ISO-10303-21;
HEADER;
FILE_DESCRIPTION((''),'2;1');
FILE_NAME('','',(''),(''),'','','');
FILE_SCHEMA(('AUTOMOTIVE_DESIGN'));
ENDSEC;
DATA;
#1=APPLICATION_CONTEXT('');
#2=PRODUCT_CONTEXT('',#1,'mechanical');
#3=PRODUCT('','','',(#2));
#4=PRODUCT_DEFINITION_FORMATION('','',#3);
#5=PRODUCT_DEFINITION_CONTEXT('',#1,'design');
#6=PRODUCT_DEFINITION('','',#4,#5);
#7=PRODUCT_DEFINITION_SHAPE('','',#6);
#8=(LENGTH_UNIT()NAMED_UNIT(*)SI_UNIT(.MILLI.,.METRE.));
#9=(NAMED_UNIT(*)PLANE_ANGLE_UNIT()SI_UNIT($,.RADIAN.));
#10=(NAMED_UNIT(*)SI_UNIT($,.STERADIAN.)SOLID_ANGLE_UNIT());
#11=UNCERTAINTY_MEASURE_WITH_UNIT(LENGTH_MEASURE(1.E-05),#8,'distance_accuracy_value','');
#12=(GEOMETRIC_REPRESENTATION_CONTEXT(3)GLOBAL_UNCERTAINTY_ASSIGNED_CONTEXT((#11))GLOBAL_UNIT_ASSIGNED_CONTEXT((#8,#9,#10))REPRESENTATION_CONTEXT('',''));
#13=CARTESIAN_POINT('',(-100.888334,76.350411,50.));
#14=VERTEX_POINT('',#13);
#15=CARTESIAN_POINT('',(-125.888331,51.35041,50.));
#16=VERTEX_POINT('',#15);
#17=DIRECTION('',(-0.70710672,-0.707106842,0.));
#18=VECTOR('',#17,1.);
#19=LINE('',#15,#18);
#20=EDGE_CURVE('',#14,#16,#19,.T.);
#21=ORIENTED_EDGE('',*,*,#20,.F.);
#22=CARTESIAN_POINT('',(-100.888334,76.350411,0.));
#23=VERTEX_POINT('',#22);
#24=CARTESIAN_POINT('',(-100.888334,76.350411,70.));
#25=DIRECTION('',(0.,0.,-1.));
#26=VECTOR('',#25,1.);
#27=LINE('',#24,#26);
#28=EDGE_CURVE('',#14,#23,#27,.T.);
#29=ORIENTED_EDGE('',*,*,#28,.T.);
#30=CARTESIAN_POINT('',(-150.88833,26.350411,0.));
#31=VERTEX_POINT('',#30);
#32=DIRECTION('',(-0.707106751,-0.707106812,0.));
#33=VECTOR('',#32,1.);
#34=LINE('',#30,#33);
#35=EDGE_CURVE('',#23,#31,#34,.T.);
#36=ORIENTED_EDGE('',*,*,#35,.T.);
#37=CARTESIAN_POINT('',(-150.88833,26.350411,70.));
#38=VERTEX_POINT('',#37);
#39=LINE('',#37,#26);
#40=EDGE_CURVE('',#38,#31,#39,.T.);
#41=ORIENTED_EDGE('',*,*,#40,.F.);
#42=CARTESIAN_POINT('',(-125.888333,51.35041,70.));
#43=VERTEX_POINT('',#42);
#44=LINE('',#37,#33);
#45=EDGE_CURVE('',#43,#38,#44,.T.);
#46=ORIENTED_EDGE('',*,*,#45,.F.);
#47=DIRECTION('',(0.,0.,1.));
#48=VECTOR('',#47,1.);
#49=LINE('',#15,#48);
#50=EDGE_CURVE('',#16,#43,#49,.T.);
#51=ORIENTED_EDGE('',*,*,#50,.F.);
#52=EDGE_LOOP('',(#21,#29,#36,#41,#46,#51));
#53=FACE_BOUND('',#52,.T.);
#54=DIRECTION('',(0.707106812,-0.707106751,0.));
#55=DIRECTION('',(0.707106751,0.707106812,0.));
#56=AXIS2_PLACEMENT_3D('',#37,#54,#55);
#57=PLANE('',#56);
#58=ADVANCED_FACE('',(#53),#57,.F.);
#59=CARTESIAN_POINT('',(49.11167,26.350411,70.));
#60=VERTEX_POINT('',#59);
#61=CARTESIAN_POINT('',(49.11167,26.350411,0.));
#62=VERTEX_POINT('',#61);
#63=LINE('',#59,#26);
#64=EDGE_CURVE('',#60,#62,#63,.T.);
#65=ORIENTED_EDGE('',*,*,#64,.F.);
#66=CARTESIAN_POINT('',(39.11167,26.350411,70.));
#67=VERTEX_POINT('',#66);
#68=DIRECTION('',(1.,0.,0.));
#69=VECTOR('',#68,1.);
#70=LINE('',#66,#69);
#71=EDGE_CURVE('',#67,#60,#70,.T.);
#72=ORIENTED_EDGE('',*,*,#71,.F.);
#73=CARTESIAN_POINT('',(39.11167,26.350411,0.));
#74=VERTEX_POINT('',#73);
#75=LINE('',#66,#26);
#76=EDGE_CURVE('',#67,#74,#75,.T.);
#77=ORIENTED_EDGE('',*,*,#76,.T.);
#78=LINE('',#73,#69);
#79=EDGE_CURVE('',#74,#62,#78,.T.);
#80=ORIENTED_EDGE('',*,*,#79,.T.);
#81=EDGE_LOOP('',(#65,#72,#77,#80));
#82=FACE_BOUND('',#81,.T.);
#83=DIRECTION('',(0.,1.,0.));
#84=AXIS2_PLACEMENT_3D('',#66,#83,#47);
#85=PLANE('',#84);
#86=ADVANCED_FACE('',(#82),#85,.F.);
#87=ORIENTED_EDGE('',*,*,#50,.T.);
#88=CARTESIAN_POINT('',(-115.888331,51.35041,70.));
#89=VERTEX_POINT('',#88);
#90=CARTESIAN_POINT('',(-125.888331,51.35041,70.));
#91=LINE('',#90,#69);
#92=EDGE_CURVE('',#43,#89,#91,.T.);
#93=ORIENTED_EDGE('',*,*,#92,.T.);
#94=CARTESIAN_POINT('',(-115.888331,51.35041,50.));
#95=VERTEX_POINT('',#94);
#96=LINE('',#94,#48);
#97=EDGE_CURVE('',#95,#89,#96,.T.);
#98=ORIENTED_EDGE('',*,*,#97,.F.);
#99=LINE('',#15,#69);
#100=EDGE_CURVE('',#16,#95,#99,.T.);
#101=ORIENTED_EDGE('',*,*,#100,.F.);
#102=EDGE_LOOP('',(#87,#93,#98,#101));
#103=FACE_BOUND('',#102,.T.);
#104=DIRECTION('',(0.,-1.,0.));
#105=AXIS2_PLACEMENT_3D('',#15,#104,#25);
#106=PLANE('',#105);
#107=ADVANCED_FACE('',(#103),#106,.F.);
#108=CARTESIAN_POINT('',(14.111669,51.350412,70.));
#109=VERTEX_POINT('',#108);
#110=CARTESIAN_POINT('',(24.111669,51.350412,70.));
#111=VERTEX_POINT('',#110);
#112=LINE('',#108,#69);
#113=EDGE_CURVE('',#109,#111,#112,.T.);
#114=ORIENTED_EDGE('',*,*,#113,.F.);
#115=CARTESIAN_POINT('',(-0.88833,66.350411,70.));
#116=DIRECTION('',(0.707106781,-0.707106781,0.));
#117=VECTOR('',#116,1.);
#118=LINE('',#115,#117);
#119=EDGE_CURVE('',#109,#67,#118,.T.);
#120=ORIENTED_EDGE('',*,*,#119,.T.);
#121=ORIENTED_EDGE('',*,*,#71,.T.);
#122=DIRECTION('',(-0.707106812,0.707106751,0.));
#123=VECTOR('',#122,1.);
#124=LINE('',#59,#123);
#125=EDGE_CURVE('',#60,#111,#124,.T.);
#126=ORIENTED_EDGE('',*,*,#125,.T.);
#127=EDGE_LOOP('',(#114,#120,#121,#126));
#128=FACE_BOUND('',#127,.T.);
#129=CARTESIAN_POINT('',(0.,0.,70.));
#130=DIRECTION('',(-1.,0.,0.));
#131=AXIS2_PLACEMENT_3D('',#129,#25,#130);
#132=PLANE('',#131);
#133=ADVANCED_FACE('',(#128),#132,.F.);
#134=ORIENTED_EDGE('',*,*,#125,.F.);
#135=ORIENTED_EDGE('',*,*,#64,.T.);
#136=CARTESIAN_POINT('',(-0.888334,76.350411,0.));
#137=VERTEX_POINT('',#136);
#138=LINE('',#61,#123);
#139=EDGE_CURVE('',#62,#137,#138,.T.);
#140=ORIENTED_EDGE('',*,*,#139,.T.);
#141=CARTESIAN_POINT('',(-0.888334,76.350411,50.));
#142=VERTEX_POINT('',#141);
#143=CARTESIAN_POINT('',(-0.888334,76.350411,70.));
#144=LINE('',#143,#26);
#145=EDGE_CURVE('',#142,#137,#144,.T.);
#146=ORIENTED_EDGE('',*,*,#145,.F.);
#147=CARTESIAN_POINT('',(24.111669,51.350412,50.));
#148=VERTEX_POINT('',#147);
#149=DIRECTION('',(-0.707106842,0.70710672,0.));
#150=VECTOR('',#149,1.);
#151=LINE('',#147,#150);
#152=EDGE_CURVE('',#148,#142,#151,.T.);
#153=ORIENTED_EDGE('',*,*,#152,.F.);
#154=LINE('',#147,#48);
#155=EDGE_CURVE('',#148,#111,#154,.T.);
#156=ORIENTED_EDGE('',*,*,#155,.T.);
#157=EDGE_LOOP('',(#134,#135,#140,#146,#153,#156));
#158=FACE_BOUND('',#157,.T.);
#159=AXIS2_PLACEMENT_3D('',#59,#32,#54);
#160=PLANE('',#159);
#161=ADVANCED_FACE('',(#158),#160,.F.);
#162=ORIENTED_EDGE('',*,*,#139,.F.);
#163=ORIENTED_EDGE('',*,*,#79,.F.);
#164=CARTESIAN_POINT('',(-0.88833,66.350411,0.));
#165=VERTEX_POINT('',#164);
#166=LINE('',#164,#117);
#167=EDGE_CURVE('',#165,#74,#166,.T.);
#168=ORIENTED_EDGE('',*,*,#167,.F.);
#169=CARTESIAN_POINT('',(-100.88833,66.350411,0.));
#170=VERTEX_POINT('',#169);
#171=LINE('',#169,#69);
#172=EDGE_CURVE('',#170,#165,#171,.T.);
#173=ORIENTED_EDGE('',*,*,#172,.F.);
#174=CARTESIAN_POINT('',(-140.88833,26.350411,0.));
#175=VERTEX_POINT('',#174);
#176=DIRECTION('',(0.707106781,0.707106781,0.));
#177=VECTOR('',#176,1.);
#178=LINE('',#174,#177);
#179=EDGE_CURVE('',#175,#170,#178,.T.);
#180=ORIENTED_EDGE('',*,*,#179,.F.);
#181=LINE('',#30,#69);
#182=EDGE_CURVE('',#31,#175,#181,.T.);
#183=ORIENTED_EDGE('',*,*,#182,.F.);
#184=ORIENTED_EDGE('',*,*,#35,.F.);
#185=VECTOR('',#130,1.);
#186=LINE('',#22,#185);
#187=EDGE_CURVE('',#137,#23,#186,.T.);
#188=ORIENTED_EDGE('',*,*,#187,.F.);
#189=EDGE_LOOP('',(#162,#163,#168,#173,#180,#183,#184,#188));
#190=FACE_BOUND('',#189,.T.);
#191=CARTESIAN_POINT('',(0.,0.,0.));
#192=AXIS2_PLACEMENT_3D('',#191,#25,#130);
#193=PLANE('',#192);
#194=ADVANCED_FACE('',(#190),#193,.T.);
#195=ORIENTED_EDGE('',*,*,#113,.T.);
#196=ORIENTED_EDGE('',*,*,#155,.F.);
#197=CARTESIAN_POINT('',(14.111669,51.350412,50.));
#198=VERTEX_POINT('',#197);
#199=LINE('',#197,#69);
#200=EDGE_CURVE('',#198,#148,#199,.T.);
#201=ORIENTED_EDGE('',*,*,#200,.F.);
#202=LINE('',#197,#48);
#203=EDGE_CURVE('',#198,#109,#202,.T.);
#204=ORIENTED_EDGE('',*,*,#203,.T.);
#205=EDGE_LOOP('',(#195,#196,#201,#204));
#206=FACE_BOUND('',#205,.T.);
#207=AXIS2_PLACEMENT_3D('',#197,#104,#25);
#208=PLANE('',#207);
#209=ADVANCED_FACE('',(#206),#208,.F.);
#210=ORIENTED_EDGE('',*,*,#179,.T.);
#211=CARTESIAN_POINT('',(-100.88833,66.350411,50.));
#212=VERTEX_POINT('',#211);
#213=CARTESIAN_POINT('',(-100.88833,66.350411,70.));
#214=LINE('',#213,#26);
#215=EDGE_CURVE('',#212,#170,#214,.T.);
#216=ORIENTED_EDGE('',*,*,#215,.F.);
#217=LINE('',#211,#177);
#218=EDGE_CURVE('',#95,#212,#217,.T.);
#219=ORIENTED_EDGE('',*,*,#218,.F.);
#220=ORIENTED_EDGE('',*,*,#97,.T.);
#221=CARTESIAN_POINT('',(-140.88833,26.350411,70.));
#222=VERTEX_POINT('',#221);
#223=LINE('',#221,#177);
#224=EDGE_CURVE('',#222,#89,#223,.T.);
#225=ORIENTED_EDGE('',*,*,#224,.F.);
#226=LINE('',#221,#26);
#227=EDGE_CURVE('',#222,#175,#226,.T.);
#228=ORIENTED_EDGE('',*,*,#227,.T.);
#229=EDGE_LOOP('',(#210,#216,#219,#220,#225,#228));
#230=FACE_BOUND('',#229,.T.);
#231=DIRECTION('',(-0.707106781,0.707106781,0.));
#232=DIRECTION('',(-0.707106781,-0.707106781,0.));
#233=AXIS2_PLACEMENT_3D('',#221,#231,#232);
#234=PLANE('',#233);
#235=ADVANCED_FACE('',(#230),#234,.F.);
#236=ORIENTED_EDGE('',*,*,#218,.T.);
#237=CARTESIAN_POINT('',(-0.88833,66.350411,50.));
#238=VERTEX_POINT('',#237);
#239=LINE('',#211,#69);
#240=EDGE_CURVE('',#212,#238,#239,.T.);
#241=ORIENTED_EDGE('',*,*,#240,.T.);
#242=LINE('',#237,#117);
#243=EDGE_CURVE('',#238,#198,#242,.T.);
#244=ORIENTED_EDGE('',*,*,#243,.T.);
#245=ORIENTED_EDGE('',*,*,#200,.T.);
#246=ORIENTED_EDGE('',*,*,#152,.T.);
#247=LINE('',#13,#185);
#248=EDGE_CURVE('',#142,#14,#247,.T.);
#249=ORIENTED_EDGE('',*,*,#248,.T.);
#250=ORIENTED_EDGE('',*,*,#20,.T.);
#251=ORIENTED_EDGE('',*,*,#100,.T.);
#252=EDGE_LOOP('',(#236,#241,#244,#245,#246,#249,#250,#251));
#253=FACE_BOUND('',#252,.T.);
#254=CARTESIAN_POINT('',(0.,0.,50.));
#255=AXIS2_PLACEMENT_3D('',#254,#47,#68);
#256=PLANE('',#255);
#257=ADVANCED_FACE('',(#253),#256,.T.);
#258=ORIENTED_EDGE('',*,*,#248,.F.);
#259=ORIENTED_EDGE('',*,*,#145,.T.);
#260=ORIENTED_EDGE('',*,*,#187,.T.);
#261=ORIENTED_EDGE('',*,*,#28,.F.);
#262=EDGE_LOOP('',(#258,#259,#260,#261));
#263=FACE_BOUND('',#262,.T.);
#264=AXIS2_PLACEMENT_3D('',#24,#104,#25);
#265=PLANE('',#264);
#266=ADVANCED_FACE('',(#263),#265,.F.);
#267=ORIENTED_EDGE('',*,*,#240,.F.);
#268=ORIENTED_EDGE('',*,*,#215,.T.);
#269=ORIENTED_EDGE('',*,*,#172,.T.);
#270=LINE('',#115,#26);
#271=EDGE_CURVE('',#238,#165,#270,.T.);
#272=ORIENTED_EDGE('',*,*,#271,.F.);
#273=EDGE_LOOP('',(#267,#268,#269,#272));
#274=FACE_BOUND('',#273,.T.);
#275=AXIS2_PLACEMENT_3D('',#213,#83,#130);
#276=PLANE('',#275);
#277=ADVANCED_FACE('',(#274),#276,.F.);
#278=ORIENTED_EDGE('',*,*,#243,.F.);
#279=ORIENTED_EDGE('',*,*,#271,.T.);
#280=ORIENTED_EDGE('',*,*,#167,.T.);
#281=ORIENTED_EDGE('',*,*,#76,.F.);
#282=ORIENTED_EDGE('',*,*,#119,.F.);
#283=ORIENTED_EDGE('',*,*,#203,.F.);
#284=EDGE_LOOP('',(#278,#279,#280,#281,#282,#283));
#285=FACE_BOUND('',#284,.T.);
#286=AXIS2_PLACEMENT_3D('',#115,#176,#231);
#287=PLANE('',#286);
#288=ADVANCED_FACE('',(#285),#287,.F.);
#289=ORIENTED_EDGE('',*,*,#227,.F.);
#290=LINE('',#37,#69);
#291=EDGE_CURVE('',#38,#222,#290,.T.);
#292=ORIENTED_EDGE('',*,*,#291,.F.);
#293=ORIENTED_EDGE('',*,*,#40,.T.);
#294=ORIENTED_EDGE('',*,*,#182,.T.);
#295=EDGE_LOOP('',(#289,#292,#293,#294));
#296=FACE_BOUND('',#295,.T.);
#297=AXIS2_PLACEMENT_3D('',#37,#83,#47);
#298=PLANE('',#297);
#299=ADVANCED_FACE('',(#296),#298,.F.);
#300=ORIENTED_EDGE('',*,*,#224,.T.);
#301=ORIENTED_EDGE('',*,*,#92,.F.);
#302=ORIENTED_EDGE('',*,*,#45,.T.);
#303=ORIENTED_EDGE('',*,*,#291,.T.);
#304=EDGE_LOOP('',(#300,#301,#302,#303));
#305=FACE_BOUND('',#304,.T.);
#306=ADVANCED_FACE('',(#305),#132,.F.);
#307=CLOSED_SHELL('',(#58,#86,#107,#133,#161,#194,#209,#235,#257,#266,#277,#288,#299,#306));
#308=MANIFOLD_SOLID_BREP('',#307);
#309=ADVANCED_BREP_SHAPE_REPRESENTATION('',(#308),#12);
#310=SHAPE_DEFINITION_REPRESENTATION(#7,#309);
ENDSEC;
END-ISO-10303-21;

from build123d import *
from OCP.BRepAlgoAPI import BRepAlgoAPI_Cut
from OCP.TopTools import TopTools_ListOfShape

# Parameters (mm, degrees)
EXTRUDE_1_DEPTH     = 70
CUT_EXTRUDE_1_DEPTH = 20


with BuildPart() as part:
    # 草图2 → 凸台-拉伸1 (new body)
    with BuildSketch(Plane.XY):
        Polygon((-150.888329598, 26.350410604), (-100.888333902, 76.350410604), (-0.888333902, 76.350410604), (49.111670402, 26.350410604), (39.111670402, 26.350410604), (-0.888329598, 66.350410604), (-100.888329598, 66.350410604), (-140.888329598, 26.350410604), align=None)
    extrude(amount=EXTRUDE_1_DEPTH)


with BuildPart() as cut_extrude_1_tool:
    # 草图3 → 切除-拉伸1 (new body)
    with BuildSketch(Plane.XY.offset(70)):
        Polygon((-100.888333902, 76.350410604), (-0.888333902, 76.350410604), (24.111669326, 51.350411681), (14.111669326, 51.350411681), (-0.888329598, 66.350410604), (-100.888329598, 66.350410604), (-115.888330674, 51.350409528), (-125.888330674, 51.350409528), align=None)
    extrude(amount=-CUT_EXTRUDE_1_DEPTH)


with BuildPart() as part_1:
    add(part.part)

    # 切除-拉伸1: cut by cut_extrude_1_tool, with a tolerance
    cut_extrude_1_stock = TopTools_ListOfShape()
    cut_extrude_1_stock.Append(part_1.part.wrapped)
    cut_extrude_1_tools = TopTools_ListOfShape()
    cut_extrude_1_tools.Append(cut_extrude_1_tool.part.wrapped)
    cut_extrude_1_cut = BRepAlgoAPI_Cut()
    cut_extrude_1_cut.SetArguments(cut_extrude_1_stock)
    cut_extrude_1_cut.SetTools(cut_extrude_1_tools)
    cut_extrude_1_cut.SetFuzzyValue(0.00001)
    cut_extrude_1_cut.Build()
    add(Compound.cast(cut_extrude_1_cut.Shape()).solids(), mode=Mode.REPLACE)


solid = part_1.part
